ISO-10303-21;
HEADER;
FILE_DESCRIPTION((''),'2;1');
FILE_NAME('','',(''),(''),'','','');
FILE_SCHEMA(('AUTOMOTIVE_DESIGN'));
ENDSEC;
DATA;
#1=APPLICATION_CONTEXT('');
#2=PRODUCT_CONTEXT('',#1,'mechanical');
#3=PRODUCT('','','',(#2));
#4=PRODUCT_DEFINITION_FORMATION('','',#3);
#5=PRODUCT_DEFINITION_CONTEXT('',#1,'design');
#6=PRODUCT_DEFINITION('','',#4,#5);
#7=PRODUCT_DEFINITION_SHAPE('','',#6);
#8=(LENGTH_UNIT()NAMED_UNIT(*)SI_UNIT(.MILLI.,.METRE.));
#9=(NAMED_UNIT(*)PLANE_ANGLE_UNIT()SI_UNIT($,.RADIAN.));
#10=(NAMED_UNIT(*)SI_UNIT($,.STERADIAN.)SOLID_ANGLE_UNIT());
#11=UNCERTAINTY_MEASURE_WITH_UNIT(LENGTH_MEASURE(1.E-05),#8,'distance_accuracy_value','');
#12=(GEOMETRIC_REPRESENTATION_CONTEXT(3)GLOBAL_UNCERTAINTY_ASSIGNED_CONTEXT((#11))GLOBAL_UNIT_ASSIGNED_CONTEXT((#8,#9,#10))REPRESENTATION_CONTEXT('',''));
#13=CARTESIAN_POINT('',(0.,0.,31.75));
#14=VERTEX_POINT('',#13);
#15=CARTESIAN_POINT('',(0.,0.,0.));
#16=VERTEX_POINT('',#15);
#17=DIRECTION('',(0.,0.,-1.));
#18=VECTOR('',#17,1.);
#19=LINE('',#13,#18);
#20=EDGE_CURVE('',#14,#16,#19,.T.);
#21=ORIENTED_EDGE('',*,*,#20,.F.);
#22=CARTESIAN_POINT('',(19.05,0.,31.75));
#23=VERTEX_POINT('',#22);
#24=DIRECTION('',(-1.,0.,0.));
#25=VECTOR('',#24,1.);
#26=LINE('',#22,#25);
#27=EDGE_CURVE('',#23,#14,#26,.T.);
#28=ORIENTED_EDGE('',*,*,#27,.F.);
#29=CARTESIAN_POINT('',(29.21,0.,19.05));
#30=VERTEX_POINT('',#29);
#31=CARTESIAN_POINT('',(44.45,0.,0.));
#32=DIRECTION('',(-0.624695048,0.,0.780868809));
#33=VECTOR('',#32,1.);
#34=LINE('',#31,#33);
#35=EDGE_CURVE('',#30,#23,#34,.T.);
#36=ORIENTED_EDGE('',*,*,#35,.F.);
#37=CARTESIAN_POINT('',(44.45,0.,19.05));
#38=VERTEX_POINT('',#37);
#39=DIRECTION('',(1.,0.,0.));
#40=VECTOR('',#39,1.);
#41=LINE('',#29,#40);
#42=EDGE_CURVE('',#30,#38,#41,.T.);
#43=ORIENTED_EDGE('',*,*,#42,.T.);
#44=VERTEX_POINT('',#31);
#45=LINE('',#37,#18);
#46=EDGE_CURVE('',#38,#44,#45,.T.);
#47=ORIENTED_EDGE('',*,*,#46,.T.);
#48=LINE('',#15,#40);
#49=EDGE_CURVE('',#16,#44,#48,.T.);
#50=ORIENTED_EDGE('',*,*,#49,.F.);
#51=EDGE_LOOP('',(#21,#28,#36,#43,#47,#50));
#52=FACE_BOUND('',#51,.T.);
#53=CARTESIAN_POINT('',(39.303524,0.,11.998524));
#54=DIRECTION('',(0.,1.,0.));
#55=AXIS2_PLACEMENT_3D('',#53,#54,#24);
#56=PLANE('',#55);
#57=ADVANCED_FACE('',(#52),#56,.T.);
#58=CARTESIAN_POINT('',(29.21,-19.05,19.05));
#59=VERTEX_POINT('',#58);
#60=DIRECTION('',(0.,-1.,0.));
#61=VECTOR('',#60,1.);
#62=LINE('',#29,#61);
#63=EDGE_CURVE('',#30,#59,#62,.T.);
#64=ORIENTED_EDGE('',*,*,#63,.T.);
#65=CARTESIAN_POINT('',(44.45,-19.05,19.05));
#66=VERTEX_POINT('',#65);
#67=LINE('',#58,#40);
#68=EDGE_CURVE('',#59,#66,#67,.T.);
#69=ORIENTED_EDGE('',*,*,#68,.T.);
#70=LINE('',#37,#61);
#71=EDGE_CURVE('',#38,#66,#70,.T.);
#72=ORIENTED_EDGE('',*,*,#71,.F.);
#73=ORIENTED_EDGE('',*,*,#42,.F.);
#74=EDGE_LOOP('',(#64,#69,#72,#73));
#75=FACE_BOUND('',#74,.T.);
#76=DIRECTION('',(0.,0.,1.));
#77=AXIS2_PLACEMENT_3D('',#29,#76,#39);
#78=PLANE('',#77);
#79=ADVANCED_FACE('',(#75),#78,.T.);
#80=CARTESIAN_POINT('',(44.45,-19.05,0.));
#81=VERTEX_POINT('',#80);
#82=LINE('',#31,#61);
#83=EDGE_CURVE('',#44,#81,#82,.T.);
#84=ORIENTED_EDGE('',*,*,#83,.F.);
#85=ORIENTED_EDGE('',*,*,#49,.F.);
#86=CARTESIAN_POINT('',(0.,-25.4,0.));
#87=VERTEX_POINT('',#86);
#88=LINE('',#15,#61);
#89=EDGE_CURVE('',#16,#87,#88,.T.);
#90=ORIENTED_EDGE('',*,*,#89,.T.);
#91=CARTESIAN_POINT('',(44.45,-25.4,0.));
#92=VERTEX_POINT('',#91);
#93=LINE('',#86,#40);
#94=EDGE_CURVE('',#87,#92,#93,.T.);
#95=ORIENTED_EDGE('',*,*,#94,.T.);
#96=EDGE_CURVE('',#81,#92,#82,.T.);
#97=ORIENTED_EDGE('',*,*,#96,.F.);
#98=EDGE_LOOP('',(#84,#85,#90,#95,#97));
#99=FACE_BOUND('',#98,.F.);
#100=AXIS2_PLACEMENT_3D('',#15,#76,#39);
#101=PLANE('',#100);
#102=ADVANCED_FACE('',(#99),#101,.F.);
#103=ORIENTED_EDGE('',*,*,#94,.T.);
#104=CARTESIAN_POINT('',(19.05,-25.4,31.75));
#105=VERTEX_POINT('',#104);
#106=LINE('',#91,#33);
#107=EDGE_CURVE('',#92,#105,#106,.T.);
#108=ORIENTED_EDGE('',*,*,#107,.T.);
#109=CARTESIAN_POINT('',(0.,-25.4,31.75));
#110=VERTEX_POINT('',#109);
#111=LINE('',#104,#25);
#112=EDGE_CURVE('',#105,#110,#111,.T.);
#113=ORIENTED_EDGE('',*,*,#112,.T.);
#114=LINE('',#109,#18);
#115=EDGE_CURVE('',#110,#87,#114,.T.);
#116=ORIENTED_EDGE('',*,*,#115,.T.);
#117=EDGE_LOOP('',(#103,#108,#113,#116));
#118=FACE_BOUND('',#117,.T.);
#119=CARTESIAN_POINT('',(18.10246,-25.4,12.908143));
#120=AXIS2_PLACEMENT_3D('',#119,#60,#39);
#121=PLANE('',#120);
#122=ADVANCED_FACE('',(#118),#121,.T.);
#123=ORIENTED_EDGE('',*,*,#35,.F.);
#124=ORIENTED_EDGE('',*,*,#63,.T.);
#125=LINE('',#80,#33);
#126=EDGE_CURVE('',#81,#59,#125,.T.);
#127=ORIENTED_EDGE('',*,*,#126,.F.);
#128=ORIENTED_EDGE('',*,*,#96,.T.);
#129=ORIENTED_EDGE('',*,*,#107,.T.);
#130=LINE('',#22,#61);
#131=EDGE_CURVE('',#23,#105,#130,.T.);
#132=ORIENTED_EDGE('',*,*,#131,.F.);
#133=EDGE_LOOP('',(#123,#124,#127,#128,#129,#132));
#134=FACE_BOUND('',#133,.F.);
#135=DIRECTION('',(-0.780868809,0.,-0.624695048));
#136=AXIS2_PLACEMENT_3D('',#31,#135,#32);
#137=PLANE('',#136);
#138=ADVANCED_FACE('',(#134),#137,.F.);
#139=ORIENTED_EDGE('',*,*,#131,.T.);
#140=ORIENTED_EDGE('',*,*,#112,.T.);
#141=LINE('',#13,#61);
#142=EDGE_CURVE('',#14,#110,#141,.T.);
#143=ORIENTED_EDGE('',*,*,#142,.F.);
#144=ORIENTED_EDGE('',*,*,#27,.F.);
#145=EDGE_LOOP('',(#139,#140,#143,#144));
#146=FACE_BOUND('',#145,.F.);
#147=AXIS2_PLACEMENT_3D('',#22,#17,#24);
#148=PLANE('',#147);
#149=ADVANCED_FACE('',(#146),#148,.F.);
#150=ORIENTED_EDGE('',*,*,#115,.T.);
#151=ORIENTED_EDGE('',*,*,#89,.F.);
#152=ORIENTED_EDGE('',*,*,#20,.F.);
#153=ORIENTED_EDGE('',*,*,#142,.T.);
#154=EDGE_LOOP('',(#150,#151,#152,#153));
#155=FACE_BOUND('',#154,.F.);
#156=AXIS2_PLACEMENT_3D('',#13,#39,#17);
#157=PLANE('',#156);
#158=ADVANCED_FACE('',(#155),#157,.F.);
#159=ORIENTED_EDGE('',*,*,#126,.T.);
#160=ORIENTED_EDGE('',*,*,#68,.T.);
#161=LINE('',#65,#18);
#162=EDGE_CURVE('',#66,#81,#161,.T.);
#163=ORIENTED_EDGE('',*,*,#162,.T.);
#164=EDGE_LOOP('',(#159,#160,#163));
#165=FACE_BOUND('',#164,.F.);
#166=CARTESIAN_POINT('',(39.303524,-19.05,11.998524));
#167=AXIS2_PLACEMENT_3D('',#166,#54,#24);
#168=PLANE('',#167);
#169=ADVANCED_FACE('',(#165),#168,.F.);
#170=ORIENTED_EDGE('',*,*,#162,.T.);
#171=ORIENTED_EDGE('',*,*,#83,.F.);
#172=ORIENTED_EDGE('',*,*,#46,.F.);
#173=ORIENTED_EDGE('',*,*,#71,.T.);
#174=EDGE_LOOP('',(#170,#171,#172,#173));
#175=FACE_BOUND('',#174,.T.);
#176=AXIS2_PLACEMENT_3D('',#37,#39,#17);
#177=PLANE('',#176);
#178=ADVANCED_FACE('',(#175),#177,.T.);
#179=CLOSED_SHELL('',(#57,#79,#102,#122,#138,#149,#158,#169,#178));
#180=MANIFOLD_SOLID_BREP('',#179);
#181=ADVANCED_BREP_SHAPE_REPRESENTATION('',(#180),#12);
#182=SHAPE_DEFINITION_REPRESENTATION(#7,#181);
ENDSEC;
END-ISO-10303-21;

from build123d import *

# Parameters (mm, degrees)
F1_DEPTH = 25.4
F5_DEPTH = 19.05


# Not quite as in the source:
# - a feature of the source that left no trace in its solid (it failed there, or was rolled back) is left out


with BuildPart() as f1:
    # F0 (on Front) → F1 (new body)
    with BuildSketch(Plane.XZ):
        Polygon((0, 31.75), (0, 0), (44.45, 0), (19.05, 31.75), align=None)
    extrude(amount=F1_DEPTH)

    # F4 (on face) → F5 (join)
    with BuildSketch(Plane(origin=(0, 0, 0), x_dir=(-1, 0, 0), z_dir=(0, 1, 0))):
        Polygon((-44.45, 19.05), (-44.45, 0), (-29.21, 19.05), align=None)
    extrude(amount=-F5_DEPTH)


solid = f1.part
